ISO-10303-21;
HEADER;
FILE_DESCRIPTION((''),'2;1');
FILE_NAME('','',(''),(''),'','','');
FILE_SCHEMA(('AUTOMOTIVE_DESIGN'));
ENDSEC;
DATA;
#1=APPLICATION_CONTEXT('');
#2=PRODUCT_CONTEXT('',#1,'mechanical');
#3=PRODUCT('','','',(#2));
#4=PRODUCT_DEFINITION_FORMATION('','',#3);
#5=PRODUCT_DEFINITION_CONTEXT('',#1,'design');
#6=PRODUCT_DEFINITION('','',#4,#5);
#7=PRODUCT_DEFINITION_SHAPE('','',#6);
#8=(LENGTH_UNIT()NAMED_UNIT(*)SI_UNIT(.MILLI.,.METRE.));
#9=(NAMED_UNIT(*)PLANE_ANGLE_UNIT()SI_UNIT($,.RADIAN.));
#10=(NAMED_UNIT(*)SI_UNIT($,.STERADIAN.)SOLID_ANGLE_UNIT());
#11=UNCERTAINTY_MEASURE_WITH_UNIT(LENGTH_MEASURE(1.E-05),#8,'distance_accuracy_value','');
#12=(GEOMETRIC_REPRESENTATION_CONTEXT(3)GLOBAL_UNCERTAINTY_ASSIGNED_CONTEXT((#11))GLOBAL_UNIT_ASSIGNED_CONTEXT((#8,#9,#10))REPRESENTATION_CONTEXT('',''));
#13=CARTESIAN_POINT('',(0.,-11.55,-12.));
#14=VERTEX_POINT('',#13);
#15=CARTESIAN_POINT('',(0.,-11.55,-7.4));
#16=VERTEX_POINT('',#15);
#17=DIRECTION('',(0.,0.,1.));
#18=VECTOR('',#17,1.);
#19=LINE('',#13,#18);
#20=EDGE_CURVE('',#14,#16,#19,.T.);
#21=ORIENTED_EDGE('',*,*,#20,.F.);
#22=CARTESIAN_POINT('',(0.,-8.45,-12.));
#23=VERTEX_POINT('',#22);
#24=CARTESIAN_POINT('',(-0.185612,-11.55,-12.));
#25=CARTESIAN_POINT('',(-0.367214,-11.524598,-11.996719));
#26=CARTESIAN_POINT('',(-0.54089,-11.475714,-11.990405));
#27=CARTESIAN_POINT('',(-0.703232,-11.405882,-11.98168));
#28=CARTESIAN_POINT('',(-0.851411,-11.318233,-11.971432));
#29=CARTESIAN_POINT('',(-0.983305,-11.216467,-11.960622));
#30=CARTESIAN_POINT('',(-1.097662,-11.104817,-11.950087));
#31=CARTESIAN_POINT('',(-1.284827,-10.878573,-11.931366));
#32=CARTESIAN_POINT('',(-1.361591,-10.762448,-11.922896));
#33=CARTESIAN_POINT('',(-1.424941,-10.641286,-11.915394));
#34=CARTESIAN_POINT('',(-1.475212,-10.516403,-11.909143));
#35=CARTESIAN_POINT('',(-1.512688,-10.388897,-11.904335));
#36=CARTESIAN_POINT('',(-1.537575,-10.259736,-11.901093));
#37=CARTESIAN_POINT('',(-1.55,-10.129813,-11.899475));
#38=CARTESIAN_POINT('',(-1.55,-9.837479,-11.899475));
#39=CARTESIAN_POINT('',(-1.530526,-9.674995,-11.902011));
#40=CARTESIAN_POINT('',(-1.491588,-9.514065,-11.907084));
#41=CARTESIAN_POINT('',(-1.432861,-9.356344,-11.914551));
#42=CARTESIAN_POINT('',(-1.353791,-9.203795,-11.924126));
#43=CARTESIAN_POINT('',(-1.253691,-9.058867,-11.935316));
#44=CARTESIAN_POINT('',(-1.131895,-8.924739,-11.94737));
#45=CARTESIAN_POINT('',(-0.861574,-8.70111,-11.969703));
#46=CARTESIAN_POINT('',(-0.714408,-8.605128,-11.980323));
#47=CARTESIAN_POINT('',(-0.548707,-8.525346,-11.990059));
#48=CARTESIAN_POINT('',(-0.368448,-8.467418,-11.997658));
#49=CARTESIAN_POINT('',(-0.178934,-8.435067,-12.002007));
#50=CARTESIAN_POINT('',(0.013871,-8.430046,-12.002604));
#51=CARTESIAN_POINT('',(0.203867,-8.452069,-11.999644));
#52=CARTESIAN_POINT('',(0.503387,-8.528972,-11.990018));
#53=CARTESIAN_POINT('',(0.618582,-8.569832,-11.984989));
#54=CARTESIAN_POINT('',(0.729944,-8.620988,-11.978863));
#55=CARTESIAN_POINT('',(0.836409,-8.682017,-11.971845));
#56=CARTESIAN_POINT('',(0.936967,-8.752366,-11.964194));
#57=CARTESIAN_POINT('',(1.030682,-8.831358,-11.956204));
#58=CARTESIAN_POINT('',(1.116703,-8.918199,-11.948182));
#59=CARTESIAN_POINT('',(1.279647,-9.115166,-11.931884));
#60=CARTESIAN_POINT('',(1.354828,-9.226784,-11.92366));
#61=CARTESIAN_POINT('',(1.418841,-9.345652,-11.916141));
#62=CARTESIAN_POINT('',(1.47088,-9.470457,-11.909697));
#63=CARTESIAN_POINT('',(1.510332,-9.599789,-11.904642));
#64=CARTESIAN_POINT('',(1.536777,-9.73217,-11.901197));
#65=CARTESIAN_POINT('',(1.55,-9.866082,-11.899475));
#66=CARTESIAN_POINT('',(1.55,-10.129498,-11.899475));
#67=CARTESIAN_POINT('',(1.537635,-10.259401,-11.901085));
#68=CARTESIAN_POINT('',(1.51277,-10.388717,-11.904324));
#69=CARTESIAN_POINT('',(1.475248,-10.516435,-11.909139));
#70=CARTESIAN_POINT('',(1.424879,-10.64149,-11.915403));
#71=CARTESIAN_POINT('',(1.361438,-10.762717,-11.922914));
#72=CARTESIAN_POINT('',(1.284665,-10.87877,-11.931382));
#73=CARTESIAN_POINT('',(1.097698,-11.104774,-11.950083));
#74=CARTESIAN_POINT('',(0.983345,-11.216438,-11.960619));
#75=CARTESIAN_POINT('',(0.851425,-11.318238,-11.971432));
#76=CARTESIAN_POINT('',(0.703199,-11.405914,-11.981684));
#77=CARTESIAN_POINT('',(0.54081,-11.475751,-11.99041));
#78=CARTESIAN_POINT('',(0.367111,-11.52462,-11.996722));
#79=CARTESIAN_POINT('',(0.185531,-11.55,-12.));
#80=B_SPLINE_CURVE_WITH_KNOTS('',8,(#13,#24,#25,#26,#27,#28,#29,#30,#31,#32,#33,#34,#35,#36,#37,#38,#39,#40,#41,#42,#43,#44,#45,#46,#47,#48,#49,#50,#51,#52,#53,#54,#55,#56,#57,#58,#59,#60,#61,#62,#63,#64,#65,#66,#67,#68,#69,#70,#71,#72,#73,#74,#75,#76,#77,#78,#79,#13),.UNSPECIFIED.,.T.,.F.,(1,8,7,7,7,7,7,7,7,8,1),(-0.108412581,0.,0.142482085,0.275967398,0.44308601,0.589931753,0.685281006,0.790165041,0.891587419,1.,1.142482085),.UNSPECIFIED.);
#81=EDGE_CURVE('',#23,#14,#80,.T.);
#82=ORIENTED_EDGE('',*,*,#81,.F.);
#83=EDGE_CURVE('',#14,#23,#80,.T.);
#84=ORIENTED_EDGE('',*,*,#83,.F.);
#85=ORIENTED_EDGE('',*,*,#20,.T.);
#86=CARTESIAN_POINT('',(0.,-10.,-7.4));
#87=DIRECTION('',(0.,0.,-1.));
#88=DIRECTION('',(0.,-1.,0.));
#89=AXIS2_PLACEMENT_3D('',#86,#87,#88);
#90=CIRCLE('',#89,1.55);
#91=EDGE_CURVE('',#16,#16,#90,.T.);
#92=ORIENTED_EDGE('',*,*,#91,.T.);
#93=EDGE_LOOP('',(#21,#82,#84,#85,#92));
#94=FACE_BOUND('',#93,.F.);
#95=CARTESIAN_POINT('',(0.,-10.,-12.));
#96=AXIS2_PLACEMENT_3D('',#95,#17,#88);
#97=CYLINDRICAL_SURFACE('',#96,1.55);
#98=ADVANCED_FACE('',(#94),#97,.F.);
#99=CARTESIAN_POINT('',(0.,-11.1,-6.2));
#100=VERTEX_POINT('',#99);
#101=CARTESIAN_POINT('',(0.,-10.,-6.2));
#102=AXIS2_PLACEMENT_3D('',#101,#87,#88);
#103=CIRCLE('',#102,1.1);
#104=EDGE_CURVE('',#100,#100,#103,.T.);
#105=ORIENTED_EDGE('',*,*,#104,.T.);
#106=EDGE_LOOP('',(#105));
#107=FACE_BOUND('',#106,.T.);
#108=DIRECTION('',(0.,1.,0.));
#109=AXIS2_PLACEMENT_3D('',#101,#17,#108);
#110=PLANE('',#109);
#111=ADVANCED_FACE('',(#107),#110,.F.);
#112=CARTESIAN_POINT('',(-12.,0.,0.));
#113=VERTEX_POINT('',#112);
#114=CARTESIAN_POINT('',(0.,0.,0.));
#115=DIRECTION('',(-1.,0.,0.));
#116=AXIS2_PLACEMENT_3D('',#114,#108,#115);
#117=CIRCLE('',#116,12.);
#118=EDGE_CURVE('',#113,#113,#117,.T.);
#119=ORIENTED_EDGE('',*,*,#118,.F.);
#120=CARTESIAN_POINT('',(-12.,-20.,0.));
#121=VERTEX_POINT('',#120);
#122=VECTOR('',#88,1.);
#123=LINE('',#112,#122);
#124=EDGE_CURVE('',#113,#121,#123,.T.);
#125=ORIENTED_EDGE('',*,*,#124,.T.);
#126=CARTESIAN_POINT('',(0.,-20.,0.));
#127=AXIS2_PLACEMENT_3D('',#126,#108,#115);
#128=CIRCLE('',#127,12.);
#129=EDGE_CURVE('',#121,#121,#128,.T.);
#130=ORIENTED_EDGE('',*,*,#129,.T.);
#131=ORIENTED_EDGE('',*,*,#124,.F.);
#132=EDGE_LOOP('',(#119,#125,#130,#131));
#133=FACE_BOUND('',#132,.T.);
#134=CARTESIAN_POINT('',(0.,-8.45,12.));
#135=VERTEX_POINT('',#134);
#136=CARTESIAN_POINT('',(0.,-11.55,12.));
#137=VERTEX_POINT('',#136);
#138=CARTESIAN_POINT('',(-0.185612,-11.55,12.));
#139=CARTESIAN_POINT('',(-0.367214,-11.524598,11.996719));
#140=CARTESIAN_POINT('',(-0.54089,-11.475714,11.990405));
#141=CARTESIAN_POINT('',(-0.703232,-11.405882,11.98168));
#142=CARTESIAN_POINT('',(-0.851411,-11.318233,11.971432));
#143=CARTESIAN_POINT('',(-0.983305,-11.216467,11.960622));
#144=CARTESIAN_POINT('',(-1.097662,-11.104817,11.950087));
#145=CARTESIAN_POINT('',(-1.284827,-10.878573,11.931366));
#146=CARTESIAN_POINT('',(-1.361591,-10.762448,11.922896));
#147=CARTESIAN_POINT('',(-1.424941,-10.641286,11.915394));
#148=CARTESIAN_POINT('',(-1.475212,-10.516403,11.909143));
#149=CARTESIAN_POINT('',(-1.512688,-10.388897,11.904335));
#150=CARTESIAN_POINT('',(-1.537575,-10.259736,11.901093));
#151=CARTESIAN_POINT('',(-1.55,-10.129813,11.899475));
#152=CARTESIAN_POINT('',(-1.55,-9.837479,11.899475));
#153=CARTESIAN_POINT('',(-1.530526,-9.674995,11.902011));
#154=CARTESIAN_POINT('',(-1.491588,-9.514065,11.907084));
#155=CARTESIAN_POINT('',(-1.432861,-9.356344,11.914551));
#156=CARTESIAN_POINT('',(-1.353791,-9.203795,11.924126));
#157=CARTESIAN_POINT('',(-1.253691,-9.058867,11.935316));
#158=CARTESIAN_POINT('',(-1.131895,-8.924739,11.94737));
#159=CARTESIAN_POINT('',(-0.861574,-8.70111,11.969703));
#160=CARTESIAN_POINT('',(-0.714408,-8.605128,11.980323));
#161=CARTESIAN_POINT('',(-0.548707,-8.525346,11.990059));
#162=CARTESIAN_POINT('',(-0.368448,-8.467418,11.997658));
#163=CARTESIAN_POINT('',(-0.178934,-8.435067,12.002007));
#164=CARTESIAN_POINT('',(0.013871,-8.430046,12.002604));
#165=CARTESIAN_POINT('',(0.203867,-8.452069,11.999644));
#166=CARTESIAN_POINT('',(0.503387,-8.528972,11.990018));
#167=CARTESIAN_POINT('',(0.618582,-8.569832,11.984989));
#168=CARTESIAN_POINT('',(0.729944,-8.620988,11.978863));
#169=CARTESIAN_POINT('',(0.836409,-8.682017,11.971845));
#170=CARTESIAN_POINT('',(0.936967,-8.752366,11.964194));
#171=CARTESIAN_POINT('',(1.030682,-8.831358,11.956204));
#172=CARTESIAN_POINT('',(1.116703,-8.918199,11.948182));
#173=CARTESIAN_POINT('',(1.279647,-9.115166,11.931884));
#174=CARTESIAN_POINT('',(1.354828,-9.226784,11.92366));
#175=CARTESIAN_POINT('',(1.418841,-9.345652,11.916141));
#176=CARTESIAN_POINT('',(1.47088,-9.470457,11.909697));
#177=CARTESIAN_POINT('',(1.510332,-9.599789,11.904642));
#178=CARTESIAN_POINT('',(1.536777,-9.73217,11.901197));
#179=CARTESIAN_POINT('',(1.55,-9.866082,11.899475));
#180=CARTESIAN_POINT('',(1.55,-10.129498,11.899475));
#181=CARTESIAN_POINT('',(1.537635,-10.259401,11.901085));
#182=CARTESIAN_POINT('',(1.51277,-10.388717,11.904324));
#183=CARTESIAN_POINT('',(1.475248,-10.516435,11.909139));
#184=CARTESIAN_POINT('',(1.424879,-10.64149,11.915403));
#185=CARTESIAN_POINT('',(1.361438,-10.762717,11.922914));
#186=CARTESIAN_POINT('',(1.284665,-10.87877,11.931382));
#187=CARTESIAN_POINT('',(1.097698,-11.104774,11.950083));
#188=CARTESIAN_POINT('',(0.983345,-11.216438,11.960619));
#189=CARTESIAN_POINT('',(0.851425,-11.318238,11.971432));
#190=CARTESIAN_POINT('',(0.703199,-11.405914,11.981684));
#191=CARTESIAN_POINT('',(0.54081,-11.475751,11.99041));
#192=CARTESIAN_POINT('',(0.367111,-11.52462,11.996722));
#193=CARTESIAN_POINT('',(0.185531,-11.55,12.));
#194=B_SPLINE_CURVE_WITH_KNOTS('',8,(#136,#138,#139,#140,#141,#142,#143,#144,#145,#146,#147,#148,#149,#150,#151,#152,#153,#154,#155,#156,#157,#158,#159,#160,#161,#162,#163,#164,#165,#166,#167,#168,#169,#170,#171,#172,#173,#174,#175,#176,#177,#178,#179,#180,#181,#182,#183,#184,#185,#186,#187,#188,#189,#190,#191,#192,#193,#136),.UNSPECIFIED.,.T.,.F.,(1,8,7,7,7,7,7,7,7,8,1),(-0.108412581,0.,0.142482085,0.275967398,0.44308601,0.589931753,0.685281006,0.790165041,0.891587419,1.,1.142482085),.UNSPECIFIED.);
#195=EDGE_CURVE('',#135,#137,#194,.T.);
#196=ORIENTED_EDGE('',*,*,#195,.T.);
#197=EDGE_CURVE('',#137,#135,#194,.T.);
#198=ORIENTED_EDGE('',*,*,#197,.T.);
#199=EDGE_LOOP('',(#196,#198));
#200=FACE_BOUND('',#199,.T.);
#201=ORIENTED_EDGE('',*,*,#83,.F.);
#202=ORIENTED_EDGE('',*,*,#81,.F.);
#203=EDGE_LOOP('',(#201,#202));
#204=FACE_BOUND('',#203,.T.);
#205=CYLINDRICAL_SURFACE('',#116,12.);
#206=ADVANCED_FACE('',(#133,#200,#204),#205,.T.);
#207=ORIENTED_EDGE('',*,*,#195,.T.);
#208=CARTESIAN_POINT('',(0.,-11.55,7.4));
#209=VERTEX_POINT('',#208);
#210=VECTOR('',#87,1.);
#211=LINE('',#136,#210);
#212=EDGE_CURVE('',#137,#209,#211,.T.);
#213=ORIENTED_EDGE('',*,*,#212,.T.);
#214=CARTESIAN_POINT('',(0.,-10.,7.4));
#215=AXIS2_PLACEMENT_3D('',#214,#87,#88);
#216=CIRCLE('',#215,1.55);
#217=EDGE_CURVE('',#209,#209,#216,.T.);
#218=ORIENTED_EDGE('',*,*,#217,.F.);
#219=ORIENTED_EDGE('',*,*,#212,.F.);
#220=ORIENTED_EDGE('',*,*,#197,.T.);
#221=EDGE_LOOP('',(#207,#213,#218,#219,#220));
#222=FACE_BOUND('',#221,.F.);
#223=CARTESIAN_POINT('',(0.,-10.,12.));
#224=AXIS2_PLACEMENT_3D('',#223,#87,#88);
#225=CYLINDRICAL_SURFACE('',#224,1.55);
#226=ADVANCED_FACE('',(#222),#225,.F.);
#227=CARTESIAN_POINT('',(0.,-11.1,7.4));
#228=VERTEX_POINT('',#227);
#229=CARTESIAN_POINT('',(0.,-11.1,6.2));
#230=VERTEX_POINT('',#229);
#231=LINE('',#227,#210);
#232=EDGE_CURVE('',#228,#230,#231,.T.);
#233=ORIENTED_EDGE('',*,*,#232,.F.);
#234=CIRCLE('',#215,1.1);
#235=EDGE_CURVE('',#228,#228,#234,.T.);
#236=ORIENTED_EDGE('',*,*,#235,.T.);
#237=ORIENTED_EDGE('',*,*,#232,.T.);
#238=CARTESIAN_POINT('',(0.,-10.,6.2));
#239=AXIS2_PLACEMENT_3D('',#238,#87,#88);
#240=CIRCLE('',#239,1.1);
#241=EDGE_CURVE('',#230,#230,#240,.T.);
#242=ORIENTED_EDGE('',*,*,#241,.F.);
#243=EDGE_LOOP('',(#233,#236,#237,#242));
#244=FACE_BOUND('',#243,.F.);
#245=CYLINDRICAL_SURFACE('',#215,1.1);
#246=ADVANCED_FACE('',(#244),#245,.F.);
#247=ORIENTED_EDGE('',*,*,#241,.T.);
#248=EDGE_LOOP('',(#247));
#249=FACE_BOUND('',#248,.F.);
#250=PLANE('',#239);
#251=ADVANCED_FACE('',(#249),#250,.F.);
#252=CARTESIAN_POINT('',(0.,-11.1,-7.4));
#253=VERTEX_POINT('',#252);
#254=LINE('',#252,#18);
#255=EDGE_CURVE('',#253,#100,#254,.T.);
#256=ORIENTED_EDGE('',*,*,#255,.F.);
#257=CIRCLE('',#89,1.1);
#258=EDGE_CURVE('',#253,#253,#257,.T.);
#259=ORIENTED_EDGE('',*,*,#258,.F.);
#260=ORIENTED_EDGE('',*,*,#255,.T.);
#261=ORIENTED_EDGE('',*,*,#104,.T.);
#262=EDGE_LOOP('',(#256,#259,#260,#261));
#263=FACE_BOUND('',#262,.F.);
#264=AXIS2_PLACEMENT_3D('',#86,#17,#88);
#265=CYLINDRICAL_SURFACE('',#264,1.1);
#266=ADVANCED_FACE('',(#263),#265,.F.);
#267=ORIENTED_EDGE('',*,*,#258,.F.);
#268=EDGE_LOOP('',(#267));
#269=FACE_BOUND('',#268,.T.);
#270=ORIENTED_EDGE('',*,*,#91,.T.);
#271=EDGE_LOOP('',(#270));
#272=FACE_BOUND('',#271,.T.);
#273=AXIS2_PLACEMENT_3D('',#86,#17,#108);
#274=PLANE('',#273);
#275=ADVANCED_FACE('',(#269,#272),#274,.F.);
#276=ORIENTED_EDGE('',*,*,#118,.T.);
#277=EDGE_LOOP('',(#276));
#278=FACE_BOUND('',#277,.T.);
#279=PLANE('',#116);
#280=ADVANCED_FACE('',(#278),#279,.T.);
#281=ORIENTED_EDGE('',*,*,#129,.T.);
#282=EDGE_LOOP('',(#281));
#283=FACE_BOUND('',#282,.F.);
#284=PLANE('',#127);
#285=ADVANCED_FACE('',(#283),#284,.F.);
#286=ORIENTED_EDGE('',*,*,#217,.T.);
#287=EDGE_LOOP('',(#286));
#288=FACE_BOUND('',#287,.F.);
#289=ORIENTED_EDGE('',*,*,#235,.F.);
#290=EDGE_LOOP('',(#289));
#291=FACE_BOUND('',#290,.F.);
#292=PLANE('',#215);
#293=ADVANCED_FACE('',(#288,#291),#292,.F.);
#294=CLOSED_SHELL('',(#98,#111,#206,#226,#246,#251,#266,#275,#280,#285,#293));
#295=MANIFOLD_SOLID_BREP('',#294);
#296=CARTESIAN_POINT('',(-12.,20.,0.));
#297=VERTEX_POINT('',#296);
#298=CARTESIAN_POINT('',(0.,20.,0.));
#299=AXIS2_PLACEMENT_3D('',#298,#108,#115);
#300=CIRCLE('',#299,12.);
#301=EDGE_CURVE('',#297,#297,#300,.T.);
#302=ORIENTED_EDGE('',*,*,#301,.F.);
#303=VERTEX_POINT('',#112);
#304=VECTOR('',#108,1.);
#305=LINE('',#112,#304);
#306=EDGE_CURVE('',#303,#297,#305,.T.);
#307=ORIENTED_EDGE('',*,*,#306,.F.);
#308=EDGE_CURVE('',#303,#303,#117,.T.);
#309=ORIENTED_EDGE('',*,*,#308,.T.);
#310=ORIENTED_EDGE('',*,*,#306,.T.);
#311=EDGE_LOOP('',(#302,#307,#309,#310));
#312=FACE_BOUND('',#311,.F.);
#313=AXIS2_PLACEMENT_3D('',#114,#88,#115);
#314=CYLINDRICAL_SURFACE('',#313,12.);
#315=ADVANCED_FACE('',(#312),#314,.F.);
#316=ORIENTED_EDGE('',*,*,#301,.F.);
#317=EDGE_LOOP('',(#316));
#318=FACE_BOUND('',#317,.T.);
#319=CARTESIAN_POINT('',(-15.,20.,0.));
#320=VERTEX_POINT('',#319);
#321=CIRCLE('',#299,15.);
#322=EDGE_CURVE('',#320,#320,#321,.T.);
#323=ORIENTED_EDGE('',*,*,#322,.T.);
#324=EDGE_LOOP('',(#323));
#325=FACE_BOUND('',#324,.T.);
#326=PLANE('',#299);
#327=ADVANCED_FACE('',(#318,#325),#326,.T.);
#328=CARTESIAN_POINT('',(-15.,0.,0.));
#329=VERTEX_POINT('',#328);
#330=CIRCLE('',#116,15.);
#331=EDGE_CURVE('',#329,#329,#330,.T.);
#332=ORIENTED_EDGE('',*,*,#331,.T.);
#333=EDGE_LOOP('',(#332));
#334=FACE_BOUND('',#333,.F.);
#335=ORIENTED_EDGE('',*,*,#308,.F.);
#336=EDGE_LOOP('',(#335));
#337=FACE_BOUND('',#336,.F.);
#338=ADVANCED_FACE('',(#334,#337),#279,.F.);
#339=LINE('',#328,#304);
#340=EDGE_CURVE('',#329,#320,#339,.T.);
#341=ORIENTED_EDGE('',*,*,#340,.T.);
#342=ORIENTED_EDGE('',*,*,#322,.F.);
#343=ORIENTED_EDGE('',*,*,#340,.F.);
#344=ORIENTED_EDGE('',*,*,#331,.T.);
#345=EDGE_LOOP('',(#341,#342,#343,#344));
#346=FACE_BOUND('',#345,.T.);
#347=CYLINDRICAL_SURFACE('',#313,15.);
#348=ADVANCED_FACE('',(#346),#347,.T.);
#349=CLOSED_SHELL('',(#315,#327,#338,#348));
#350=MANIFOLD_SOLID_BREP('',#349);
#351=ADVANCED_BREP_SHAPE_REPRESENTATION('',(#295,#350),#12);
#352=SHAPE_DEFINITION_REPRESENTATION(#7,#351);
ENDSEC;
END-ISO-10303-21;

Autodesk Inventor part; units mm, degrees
ref_plane "YZ Plane" through (0, 0, 0) normal (1, 0, 0) x (0, 1, 0)
ref_plane "XZ Plane" through (0, 0, 0) normal (0, 1, 0) x (-1, 0, 0)
sketch "Sketch1" plane through (0, 0, 0) normal (0, 1, 0) x (-1, 0, 0)
  circle A0 centre (0, 0) radius 12
  circle A1 centre (0, 0) radius 15
  dimension "d0" = 24
  dimension "d1" = 30
extrude "Extrusion1" add sketch "Sketch1" against normal blind 20 contours A0
extrude "Extrusion2" add sketch "Sketch1" along normal blind 20
ref_plane "Work Plane1" through (0, 0, 12) normal (0, 0, 1) x (1, 0, 0)
sketch "Sketch2" plane through (0, 0, 12) normal (0, 0, 1) x (1, 0, 0)
  line L0 (-12, -20) -> (12, -20) projected
  line L1 (0, -20) -> (0, 0)
  line L2 (0, -10) -> (-5, -10)
  dimension "d7" = 5
hole "Hole1" at (0, -10, 12) direction (0, 0, -1) diameter 2.2 depth 5.8 counterbore diameter 3.1 counterbore depth 4.6
mirror "Mirror1" about plane through (0, 0, 0) normal (0, 0, 1) of "Hole1"
properties part number "Tube_3"
